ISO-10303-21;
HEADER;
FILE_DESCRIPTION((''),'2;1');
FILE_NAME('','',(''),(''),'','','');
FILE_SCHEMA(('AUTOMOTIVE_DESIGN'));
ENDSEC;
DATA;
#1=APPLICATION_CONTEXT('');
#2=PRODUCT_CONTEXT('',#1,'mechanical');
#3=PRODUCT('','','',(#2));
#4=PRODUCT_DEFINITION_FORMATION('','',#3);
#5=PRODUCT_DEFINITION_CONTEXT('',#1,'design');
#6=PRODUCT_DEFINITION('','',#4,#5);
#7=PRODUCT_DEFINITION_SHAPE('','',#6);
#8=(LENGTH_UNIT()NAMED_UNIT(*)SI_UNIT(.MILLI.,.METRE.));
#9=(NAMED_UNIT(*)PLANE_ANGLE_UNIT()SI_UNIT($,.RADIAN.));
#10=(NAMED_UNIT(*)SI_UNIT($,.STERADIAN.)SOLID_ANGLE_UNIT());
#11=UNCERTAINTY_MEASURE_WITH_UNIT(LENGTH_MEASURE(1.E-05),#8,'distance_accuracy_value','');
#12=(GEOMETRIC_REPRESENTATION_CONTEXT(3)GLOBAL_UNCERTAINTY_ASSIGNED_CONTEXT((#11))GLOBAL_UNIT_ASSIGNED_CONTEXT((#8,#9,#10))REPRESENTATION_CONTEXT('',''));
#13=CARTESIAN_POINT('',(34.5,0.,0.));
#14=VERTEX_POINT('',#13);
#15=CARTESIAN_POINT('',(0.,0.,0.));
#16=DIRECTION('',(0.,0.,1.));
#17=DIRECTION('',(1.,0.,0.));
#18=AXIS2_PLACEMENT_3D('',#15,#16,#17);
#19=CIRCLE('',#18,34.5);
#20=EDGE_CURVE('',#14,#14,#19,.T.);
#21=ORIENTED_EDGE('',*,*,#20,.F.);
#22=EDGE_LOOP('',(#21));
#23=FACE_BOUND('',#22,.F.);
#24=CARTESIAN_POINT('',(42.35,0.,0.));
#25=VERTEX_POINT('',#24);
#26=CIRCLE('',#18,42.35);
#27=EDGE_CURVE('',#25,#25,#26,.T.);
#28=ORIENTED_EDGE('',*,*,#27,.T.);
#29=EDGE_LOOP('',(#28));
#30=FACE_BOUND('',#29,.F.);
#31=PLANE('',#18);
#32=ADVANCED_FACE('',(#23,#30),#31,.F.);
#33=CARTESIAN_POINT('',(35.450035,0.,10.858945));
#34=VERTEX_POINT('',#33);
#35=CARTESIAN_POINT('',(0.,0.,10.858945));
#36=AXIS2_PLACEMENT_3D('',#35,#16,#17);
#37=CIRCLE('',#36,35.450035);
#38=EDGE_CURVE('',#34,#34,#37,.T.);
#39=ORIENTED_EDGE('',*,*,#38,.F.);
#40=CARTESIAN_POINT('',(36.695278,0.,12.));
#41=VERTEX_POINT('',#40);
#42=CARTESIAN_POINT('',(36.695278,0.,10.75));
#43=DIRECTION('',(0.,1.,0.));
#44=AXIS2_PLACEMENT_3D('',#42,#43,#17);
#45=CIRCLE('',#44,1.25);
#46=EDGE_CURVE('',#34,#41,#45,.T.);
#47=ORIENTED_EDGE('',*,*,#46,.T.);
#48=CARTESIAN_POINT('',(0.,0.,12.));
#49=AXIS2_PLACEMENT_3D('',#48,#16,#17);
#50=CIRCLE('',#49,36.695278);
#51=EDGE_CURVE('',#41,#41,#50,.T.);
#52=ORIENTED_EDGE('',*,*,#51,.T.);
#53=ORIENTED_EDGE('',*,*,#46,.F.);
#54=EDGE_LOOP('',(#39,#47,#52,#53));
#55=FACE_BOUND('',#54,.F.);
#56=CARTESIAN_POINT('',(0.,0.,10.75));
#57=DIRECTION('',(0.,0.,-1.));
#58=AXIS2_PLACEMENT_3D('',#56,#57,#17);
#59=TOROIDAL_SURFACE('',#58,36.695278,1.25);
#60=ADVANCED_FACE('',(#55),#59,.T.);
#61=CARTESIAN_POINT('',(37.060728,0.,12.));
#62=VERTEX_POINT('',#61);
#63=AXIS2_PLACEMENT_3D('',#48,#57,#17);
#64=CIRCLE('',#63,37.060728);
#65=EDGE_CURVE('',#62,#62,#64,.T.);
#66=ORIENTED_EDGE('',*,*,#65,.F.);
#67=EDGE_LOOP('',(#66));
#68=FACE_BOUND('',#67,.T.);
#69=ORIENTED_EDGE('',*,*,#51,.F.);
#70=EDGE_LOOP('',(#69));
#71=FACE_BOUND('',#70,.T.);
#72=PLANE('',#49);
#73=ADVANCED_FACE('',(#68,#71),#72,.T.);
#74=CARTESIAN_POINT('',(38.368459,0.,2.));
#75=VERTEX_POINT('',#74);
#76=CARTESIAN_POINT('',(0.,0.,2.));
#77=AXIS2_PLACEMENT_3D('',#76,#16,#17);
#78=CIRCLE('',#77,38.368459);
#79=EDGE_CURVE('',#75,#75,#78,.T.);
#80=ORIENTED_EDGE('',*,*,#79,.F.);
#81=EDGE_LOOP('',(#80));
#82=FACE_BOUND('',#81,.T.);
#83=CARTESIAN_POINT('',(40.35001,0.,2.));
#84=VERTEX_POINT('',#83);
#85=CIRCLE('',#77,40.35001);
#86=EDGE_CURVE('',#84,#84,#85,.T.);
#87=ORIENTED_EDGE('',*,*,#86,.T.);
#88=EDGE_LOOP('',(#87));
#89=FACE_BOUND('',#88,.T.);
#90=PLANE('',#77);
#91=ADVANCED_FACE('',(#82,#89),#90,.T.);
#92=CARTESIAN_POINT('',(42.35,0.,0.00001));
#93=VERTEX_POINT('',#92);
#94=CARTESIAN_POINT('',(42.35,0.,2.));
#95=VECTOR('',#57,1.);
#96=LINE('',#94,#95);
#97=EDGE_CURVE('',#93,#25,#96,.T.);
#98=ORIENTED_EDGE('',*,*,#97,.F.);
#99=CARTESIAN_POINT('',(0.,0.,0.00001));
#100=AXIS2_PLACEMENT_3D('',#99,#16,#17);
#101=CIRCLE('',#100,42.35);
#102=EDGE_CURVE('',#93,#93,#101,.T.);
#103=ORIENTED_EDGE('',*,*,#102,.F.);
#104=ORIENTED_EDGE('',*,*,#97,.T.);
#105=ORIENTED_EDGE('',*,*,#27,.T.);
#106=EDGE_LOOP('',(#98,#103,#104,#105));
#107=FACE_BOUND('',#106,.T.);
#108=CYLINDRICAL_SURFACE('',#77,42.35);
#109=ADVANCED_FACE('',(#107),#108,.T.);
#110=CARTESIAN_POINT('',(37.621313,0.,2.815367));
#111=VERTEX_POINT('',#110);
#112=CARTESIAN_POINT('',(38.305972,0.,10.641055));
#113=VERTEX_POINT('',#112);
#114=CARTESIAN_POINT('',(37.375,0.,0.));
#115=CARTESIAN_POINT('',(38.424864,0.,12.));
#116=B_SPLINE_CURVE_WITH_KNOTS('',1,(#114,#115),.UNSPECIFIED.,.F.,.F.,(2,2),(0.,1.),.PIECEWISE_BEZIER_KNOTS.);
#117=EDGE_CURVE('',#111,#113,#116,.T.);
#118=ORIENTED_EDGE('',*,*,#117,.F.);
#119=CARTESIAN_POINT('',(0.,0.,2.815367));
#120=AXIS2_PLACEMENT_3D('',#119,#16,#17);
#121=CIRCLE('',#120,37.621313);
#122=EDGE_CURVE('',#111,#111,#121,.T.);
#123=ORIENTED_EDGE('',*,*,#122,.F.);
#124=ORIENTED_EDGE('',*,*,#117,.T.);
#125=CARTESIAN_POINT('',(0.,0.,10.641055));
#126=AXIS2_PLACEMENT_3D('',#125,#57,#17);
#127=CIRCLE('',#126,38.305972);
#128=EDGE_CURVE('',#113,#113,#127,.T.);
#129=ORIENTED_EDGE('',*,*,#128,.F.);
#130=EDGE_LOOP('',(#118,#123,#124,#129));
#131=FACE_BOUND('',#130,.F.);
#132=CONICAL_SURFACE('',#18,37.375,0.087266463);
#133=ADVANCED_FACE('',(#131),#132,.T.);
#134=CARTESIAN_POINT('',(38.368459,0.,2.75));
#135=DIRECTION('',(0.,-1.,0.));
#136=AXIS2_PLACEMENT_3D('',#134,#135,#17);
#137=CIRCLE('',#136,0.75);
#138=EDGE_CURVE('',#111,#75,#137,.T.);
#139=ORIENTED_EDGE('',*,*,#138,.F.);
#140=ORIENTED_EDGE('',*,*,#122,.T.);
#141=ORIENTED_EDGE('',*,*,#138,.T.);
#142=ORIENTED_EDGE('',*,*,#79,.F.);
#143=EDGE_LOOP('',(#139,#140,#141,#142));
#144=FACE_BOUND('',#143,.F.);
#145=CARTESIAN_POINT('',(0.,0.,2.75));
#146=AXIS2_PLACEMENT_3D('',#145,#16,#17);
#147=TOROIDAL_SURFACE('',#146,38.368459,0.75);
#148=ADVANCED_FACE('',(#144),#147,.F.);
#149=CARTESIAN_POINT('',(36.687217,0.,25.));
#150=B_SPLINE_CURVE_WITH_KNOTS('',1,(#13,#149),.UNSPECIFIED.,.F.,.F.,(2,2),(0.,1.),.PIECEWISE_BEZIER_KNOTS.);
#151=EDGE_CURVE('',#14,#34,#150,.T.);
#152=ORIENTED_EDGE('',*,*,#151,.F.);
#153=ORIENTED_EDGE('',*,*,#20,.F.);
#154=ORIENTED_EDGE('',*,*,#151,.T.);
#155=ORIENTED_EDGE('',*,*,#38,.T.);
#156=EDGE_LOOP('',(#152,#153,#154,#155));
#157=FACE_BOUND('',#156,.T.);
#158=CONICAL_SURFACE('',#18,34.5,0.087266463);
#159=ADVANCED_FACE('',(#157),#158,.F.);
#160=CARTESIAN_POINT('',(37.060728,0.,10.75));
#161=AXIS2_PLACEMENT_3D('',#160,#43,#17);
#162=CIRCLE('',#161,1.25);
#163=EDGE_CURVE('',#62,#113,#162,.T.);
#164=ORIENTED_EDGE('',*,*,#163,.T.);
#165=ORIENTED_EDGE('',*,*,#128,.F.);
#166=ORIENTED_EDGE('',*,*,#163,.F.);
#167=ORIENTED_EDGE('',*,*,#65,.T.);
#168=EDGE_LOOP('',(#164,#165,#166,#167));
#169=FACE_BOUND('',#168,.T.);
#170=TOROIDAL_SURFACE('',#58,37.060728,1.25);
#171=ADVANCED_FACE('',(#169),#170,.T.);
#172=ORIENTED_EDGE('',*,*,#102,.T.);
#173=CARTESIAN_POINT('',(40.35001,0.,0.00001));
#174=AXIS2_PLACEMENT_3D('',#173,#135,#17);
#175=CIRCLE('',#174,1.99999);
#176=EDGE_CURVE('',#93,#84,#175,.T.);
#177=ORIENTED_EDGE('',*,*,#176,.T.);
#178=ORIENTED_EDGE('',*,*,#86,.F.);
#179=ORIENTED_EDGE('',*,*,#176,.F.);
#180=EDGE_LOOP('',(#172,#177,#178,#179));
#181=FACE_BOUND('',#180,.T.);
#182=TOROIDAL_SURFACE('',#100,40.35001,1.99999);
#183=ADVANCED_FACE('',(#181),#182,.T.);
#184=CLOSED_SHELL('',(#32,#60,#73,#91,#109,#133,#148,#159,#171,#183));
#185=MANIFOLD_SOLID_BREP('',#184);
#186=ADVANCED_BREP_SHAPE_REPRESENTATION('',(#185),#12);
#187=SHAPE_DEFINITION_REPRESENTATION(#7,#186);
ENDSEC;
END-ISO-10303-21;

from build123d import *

# Parameters (mm, degrees)
F0_R      = 42
F0_R_2    = 36.5
F1_DEPTH  = 2
F4_R      = 42.35
F4_R_2    = 42
F5_DEPTH  = 2
F6_R      = 1.99999
F7_R      = 37.375
F7_R_2    = 34.5
F8_DEPTH  = 12
F8_TAPER  = -5
F9_R      = 38.4248639623
F10_DEPTH = 25
F11_R     = 34.5
F12_DEPTH = 25
F12_TAPER = -5
F13_R     = 1.25
F14_R     = 0.75


# Not quite as in the source:
# - a fillet or chamfer is up to 0.001 mm smaller than in the source, because OpenCascade refuses the exact size


with BuildPart() as f1:
    # F0 (on Top) → F1 (new body)
    with BuildSketch(Plane.XY):
        Circle(F0_R)
        Circle(F0_R_2, mode=Mode.SUBTRACT)
    extrude(amount=F1_DEPTH)

    # F2 (on Front) → F3 (revolve)
    with BuildSketch(Plane.XZ):
        with BuildLine():
            Line((36.5, 0), (36.5, 2))
            Line((36.5, 2), (35.5, 2))
            ThreePointArc((35.5, 2), (34.7928932188, 2.2928932188), (34.5, 3))
            Line((34.5, 3), (34.5, 14.1715728753))
            ThreePointArc((34.5, 14.1715728753), (34.6835034191, 14.7489231444), (35.1666666667, 15.1143819168))
            ThreePointArc((35.1666666667, 15.1143819168), (35.6547005384, 18.6329931619), (32.5, 17))
            Line((32.5, 17), (32.5, 2))
            ThreePointArc((32.5, 2), (33.0857864376, 0.5857864376), (34.5, 0))
            Line((34.5, 0), (36.5, 0))
        make_face()
    revolve(axis=Axis((0, 0, 63.5549128056), (0, 0, 1)))

    # F4 (on face) → F5 (join)
    with BuildSketch(Plane.XY.offset(2)):
        Circle(F4_R)
        Circle(F4_R_2, mode=Mode.SUBTRACT)
    extrude(amount=-F5_DEPTH)

    # F6 (radius 2 in the source; OpenCascade refuses exactly that, so slightly less here)
    f6_edges = [f1.edges().sort_by_distance(p)[0] for p in [
        (-42.35, 0, 2),
    ]]
    fillet(f6_edges, radius=F6_R)

    # F7 (on face) → F8 (join)
    with BuildSketch(Plane(origin=(0, 0, 0), x_dir=(1, 0, 0), z_dir=(0, 0, -1))):
        Circle(F7_R)
        Circle(F7_R_2, mode=Mode.SUBTRACT)
    extrude(amount=-F8_DEPTH, taper=F8_TAPER)

    # F9 (on face) → F10 (cut)
    with BuildSketch(Plane.XY.offset(12)):
        Circle(F9_R)
    extrude(amount=F10_DEPTH, mode=Mode.SUBTRACT)

    # F11 (on face) → F12 (cut)
    with BuildSketch(Plane(origin=(0, 0, 0), x_dir=(1, 0, 0), z_dir=(0, 0, -1))):
        Circle(F11_R)
    extrude(amount=-F12_DEPTH, taper=F12_TAPER, mode=Mode.SUBTRACT)

    # F13
    f13_edges = [f1.edges().sort_by_distance(p)[0] for p in [
        (-38.424864, 0, 12),
        (-35.549864, 0, 12),
    ]]
    fillet(f13_edges, radius=F13_R)

    # F14
    f14_edges = [f1.edges().sort_by_distance(p)[0] for p in [
        (-37.549977, 0, 2),
    ]]
    fillet(f14_edges, radius=F14_R)


solid = f1.part
